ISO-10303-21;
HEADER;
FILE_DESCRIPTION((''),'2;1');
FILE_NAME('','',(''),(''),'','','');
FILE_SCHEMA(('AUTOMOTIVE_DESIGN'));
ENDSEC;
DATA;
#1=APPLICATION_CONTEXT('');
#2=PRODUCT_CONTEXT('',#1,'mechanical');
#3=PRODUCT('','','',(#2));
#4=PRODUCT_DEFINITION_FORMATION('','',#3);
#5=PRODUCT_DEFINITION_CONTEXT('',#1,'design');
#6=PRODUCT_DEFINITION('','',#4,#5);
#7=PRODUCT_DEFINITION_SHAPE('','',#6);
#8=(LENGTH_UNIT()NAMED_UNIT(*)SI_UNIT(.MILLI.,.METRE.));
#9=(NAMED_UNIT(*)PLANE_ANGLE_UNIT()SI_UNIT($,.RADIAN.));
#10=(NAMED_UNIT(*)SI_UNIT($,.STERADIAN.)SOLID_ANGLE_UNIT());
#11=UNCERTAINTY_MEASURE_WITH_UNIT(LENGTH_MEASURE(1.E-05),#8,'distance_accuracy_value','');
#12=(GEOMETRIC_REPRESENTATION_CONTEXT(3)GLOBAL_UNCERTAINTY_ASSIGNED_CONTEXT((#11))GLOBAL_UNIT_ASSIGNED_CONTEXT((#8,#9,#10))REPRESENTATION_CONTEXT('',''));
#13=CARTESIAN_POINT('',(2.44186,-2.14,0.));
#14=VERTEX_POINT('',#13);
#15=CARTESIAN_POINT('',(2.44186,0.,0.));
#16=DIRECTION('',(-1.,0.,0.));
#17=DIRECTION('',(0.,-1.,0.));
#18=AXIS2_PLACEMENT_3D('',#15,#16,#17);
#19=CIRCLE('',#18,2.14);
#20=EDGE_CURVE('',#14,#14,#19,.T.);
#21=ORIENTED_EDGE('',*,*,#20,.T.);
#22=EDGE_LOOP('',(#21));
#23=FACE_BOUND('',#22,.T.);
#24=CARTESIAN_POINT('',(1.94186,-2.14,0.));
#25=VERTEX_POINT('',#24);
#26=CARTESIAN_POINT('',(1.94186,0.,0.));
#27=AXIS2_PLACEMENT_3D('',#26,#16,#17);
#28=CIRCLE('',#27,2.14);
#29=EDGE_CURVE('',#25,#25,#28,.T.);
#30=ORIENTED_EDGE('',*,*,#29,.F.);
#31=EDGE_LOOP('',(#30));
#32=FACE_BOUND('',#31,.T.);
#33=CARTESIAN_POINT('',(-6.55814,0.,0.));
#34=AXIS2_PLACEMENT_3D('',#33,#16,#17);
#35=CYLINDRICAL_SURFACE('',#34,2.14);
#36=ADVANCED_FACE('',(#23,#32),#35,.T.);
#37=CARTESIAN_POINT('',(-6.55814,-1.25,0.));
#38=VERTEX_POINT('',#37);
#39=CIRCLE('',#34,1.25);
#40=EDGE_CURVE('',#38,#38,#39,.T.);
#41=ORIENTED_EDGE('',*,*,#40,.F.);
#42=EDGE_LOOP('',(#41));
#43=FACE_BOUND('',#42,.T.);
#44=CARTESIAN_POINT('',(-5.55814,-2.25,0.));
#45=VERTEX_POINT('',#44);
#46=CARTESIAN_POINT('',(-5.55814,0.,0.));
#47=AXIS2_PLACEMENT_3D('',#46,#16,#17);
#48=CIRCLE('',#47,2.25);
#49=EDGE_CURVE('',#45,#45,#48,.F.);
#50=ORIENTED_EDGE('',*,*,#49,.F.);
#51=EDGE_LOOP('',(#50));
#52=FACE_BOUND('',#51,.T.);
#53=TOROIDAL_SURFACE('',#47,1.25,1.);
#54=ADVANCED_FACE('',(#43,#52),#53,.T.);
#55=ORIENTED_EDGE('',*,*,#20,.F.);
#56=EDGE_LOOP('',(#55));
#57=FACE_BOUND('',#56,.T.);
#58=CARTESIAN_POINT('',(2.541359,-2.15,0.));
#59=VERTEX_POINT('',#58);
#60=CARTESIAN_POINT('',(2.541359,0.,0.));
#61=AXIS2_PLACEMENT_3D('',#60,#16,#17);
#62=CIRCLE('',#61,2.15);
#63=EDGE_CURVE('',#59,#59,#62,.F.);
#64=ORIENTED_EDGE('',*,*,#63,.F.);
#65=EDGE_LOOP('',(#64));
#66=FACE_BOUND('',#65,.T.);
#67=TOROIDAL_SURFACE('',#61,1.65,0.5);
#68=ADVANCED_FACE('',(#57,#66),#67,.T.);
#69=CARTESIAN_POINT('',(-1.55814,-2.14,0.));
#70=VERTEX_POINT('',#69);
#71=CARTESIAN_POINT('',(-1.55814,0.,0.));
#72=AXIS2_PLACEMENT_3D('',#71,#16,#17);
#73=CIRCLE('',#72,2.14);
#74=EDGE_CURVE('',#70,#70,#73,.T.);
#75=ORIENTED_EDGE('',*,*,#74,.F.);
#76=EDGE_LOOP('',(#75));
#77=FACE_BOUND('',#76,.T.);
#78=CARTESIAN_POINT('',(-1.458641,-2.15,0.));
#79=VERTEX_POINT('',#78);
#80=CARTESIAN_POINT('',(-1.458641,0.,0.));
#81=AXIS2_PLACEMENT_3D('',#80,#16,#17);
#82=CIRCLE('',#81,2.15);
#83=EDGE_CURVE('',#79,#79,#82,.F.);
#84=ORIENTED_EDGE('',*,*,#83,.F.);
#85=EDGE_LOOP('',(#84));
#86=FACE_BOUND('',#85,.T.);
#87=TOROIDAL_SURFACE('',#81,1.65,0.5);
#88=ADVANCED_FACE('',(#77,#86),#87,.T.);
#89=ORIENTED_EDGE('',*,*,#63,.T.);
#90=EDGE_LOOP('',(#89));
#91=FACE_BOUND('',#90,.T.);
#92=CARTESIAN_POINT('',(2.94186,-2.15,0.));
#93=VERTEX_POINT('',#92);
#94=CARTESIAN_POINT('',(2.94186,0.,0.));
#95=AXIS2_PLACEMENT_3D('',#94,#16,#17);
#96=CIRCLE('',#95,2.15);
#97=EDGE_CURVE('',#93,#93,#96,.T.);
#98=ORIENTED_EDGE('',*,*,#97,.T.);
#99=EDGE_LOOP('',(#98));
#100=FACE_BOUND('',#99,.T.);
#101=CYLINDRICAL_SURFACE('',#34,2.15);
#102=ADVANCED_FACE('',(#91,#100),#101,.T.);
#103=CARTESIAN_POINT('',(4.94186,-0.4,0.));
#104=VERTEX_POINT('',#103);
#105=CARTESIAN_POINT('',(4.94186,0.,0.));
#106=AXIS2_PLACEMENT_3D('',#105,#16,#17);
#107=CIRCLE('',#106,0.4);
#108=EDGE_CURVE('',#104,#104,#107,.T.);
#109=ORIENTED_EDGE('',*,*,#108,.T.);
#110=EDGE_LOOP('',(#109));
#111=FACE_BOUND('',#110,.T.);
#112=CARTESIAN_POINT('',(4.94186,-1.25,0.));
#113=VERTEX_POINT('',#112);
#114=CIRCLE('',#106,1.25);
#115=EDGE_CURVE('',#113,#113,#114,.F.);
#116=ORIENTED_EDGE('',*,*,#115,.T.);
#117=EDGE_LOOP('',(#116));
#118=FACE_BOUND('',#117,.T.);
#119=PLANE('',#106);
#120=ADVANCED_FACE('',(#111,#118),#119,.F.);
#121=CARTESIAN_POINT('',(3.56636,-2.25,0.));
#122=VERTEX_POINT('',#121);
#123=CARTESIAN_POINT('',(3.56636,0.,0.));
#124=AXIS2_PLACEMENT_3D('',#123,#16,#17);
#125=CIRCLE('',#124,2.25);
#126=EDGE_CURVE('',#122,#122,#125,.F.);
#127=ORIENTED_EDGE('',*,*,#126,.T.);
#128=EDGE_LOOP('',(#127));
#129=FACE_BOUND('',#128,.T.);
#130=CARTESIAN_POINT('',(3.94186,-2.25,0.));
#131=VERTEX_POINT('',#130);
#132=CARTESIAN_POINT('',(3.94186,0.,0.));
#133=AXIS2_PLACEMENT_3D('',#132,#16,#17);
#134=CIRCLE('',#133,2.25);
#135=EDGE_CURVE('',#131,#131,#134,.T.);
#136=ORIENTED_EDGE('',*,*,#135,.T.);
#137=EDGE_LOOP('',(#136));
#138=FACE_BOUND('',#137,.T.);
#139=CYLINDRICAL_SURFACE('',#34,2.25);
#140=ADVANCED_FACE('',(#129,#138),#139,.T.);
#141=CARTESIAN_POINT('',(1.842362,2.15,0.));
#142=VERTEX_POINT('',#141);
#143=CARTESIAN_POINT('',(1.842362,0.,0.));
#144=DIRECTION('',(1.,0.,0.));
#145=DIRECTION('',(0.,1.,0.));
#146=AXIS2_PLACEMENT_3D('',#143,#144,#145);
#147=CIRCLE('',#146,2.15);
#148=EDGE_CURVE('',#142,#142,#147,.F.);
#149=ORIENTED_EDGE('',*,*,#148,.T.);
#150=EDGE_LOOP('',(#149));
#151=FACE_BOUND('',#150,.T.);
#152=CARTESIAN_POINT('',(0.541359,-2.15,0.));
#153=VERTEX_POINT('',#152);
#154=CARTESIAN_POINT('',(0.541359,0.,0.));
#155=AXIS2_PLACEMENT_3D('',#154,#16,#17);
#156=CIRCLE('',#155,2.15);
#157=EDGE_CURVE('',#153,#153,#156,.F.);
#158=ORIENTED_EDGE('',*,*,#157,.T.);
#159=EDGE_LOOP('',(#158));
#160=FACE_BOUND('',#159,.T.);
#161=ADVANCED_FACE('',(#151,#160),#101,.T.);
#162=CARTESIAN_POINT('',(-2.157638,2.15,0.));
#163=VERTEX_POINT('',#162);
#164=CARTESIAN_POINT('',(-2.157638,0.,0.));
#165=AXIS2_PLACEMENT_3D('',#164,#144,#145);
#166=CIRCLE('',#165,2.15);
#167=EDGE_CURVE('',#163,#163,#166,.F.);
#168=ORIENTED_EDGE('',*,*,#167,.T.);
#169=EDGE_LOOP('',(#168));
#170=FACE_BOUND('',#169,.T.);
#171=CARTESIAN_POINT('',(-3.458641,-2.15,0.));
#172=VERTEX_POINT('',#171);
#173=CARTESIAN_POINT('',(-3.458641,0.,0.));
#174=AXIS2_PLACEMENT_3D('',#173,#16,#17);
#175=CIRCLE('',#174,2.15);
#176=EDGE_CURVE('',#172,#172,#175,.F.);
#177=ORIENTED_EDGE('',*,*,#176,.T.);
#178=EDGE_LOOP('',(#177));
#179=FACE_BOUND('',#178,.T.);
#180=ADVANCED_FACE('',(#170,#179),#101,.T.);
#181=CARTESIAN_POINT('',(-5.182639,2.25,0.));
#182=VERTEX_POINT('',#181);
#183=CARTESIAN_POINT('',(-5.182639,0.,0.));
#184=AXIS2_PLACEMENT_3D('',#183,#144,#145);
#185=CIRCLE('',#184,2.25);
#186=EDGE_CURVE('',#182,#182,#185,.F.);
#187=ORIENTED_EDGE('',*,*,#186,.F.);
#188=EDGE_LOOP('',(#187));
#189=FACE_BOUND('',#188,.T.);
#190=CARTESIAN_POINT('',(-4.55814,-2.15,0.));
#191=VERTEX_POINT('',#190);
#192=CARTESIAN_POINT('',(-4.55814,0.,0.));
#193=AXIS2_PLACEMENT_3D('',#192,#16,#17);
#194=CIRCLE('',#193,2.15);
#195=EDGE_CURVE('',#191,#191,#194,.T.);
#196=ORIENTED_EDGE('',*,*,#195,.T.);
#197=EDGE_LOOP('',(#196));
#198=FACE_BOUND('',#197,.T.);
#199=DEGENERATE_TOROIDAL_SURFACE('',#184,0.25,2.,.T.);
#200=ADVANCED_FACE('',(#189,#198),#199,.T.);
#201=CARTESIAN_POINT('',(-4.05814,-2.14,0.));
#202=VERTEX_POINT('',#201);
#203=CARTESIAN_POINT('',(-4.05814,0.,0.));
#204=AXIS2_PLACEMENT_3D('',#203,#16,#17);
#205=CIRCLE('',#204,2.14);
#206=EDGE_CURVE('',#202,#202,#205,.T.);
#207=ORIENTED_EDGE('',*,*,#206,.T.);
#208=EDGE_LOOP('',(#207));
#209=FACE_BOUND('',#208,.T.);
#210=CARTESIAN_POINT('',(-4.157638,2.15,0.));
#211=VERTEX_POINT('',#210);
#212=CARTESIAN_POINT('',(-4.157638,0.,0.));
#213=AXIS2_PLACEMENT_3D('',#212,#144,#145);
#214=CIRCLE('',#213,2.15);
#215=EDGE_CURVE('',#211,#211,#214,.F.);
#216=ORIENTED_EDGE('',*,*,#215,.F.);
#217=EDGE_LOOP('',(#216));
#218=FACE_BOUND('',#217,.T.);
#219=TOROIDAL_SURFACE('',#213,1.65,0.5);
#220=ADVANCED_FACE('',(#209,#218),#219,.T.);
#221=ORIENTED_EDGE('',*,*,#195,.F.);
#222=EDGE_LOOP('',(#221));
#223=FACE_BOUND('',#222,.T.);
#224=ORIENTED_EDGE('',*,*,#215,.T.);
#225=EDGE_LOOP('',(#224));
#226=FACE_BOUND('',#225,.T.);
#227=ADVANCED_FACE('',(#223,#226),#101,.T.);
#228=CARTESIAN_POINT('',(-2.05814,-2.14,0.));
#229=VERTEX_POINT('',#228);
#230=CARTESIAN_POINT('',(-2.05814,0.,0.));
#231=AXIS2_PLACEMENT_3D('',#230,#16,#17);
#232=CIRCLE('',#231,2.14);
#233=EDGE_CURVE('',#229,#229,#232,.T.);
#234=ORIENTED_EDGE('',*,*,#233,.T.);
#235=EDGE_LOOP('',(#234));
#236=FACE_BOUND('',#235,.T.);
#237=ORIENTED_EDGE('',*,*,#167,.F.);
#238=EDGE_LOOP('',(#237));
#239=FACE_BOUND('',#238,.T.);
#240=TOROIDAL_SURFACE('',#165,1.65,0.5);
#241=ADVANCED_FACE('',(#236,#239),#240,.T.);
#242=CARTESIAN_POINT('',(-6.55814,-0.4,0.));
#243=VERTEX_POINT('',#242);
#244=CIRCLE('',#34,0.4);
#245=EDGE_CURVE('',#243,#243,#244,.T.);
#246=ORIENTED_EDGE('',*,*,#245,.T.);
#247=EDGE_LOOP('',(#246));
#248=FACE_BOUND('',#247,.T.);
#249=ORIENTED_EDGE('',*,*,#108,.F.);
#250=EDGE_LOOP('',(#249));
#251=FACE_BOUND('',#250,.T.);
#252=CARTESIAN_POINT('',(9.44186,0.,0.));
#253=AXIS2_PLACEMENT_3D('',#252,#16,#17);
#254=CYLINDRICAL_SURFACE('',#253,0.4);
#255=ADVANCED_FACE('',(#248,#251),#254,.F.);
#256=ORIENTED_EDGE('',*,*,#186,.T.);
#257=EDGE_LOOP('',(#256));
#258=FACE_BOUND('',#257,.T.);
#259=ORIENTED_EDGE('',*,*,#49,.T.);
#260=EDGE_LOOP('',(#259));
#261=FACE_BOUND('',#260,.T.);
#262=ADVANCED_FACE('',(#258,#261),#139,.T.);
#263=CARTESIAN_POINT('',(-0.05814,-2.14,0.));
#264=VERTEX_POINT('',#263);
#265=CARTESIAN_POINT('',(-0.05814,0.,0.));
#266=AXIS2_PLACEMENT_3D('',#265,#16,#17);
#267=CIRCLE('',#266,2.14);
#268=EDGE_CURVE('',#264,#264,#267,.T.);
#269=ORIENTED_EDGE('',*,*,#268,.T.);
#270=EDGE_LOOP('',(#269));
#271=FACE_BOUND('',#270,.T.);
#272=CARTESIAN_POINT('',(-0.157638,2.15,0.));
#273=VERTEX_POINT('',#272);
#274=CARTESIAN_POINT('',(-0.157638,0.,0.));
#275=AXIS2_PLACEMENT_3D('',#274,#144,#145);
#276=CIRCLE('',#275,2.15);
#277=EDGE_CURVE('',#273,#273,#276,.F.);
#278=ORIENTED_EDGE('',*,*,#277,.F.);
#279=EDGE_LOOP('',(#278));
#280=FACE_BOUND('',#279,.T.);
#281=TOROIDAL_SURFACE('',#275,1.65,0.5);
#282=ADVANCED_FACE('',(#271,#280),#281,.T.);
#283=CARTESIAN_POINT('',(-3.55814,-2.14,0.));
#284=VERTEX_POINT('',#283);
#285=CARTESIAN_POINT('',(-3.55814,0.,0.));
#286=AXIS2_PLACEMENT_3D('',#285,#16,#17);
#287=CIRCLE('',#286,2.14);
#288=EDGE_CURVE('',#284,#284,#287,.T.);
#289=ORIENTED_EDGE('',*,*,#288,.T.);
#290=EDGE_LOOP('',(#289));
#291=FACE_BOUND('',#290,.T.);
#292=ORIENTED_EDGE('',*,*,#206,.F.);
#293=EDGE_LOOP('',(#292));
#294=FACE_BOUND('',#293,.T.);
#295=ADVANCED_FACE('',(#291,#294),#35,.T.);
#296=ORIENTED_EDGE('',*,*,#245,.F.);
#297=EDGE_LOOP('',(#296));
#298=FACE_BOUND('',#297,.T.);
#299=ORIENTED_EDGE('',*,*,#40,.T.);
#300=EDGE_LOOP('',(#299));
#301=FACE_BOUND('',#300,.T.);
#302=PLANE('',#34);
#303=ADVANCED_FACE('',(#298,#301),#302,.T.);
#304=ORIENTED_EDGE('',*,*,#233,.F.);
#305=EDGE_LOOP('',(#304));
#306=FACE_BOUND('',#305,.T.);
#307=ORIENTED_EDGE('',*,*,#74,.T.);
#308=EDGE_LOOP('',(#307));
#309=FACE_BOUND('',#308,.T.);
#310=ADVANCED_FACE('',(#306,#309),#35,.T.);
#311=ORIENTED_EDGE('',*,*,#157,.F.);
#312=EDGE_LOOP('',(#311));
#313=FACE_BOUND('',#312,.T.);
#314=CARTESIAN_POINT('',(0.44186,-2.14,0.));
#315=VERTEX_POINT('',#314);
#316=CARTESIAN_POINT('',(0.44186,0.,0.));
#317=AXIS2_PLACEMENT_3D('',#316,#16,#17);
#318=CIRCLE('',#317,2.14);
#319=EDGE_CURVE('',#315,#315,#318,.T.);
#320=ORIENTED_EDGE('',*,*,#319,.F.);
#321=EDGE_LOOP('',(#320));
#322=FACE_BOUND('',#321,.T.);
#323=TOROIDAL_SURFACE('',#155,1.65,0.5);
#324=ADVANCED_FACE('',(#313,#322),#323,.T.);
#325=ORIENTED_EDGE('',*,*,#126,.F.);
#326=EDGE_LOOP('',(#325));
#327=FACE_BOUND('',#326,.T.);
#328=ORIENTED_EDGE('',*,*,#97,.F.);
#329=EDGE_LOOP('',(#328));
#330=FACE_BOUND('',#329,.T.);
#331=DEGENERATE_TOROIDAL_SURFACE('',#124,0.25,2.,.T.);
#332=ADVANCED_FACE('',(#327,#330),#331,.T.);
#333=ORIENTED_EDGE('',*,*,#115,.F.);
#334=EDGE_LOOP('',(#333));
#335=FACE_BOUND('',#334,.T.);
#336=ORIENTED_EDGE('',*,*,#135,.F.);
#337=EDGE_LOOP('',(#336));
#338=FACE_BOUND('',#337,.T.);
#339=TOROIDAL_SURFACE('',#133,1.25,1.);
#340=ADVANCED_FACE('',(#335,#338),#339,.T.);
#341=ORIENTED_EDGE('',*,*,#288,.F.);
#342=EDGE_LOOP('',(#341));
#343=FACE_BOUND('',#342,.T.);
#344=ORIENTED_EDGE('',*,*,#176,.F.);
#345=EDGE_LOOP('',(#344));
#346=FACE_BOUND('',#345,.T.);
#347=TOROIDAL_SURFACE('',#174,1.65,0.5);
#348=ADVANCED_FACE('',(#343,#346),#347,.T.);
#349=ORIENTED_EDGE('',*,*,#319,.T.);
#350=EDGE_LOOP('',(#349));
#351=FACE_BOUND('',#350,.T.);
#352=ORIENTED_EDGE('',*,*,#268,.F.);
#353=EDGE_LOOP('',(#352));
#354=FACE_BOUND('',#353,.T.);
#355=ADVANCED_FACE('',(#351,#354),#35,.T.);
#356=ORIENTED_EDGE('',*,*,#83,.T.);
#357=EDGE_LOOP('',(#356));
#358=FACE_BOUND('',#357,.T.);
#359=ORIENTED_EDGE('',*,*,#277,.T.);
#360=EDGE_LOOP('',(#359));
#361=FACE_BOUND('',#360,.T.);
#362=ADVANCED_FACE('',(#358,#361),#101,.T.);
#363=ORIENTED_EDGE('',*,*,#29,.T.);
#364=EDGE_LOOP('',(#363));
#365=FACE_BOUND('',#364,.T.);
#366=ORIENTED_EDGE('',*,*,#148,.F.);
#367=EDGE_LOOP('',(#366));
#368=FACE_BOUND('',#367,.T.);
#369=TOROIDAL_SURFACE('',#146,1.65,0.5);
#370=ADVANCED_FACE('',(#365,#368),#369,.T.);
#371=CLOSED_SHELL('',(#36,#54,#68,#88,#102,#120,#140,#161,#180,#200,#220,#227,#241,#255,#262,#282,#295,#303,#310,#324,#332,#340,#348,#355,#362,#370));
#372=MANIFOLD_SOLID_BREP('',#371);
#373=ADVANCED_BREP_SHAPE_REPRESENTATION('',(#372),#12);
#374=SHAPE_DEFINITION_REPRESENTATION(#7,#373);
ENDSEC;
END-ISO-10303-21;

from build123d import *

# Parameters (mm, degrees)
FILLET2_R          = 1
FILLET10_R         = 0.5
FILLET11_R         = 2
SKETCH3_R          = 0.4
CUT_EXTRUDE2_DEPTH = 16


with BuildPart() as part:
    # Sketch2 → Revolve1 (revolve)
    with BuildSketch(Plane.XY, mode=Mode.PRIVATE) as revolve1_sk:
        Polygon((-6.558139535, 2.25), (-6.558139535, 0), (4.941860465, 0), (4.941860465, 2.25), (2.941860465, 2.25), (2.941860465, 2.15), (2.441860465, 2.15), (2.441860465, 2.14), (1.941860465, 2.14), (1.941860465, 2.15), (1.442088765, 2.15), (0.441860465, 2.15), (0.441860465, 2.14), (-0.058139535, 2.14), (-0.058139535, 2.15), (-1.558139535, 2.15), (-1.558139535, 2.14), (-2.058139535, 2.14), (-2.058139535, 2.15), (-3.558139535, 2.15), (-3.558139535, 2.14), (-4.058139535, 2.14), (-4.058139535, 2.15), (-4.558139535, 2.15), (-4.558139535, 2.25), align=None)
    revolve(revolve1_sk.sketch.rotate(Axis((-6.558139535, 0, 0), (1, 0, 0)), 180), axis=Axis((-6.558139535, 0, 0), (1, 0, 0)))

    # Fillet2
    fillet2_edges = [part.edges().sort_by_distance(p)[0] for p in [
        (-6.558139535, 2.25, 0),
        (4.941860465, 2.25, 0),
    ]]
    fillet(fillet2_edges, radius=FILLET2_R)

    # Fillet10
    # the kernel refuses this fillet: 0.5 mm, written as the material it takes off along each edge
    with BuildSketch(Plane(origin=(-4.058139535, 0, 0), x_dir=(0, -1, 0), z_dir=(0, 0, 1))) as fillet10_piece_1:
        with BuildLine():
            CenterArc((1.65, -0.099498744), FILLET10_R, 0, 11.478340955)
            Line((2.14, 0), (2.1498, 0.001989975))
            ThreePointArc((2.1498, 0.001989975), (2.145, 0.01), (2.15, 0.01))
            Line((2.15, 0.01), (2.16, 0))
            Line((2.16, 0), (2.16, -0.099498744))
            Line((2.16, -0.099498744), (2.15, -0.099498744))
        make_face()
    revolve(axis=Axis((-4.058139535, 0, 0), (1, 0, 0)), mode=Mode.SUBTRACT)
    with BuildSketch(Plane(origin=(-3.558139535, 0, 0), x_dir=(0, -1, 0), z_dir=(0, 0, 1))) as fillet10_piece_2:
        with BuildLine():
            CenterArc((1.65, 0.099498744), FILLET10_R, 348.521659045, 11.478340955)
            Line((2.15, 0.099498744), (2.16, 0.099498744))
            Line((2.16, 0.099498744), (2.16, 0))
            Line((2.16, 0), (2.15, -0.01))
            ThreePointArc((2.15, -0.01), (2.145, -0.01), (2.1498, -0.001989975))
            Line((2.1498, -0.001989975), (2.14, 0))
        make_face()
    revolve(axis=Axis((-3.558139535, 0, 0), (1, 0, 0)), mode=Mode.SUBTRACT)
    with BuildSketch(Plane(origin=(-2.058139535, 0, 0), x_dir=(0, -1, 0), z_dir=(0, 0, 1))) as fillet10_piece_3:
        with BuildLine():
            CenterArc((1.65, -0.099498744), FILLET10_R, 0, 11.478340955)
            Line((2.14, 0), (2.1498, 0.001989975))
            ThreePointArc((2.1498, 0.001989975), (2.145, 0.01), (2.15, 0.01))
            Line((2.15, 0.01), (2.16, 0))
            Line((2.16, 0), (2.16, -0.099498744))
            Line((2.16, -0.099498744), (2.15, -0.099498744))
        make_face()
    revolve(axis=Axis((-2.058139535, 0, 0), (1, 0, 0)), mode=Mode.SUBTRACT)
    with BuildSketch(Plane(origin=(-1.558139535, 0, 0), x_dir=(0, -1, 0), z_dir=(0, 0, 1))) as fillet10_piece_4:
        with BuildLine():
            CenterArc((1.65, 0.099498744), FILLET10_R, 348.521659045, 11.478340955)
            Line((2.15, 0.099498744), (2.16, 0.099498744))
            Line((2.16, 0.099498744), (2.16, 0))
            Line((2.16, 0), (2.15, -0.01))
            ThreePointArc((2.15, -0.01), (2.145, -0.01), (2.1498, -0.001989975))
            Line((2.1498, -0.001989975), (2.14, 0))
        make_face()
    revolve(axis=Axis((-1.558139535, 0, 0), (1, 0, 0)), mode=Mode.SUBTRACT)
    with BuildSketch(Plane(origin=(-0.058139535, 0, 0), x_dir=(0, -1, 0), z_dir=(0, 0, 1))) as fillet10_piece_5:
        with BuildLine():
            CenterArc((1.65, -0.099498744), FILLET10_R, 0, 11.478340955)
            Line((2.14, 0), (2.1498, 0.001989975))
            ThreePointArc((2.1498, 0.001989975), (2.145, 0.01), (2.15, 0.01))
            Line((2.15, 0.01), (2.16, 0))
            Line((2.16, 0), (2.16, -0.099498744))
            Line((2.16, -0.099498744), (2.15, -0.099498744))
        make_face()
    revolve(axis=Axis((-0.058139535, 0, 0), (1, 0, 0)), mode=Mode.SUBTRACT)
    with BuildSketch(Plane(origin=(0.441860465, 0, 0), x_dir=(0, -1, 0), z_dir=(0, 0, 1))) as fillet10_piece_6:
        with BuildLine():
            CenterArc((1.65, 0.099498744), FILLET10_R, 348.521659045, 11.478340955)
            Line((2.15, 0.099498744), (2.16, 0.099498744))
            Line((2.16, 0.099498744), (2.16, 0))
            Line((2.16, 0), (2.15, -0.01))
            ThreePointArc((2.15, -0.01), (2.145, -0.01), (2.1498, -0.001989975))
            Line((2.1498, -0.001989975), (2.14, 0))
        make_face()
    revolve(axis=Axis((0.441860465, 0, 0), (1, 0, 0)), mode=Mode.SUBTRACT)
    with BuildSketch(Plane(origin=(1.941860465, 0, 0), x_dir=(0, -1, 0), z_dir=(0, 0, 1))) as fillet10_piece_7:
        with BuildLine():
            CenterArc((1.65, -0.099498744), FILLET10_R, 0, 11.478340955)
            Line((2.14, 0), (2.1498, 0.001989975))
            ThreePointArc((2.1498, 0.001989975), (2.145, 0.01), (2.15, 0.01))
            Line((2.15, 0.01), (2.16, 0))
            Line((2.16, 0), (2.16, -0.099498744))
            Line((2.16, -0.099498744), (2.15, -0.099498744))
        make_face()
    revolve(axis=Axis((1.941860465, 0, 0), (1, 0, 0)), mode=Mode.SUBTRACT)
    with BuildSketch(Plane(origin=(2.441860465, 0, 0), x_dir=(0, -1, 0), z_dir=(0, 0, 1))) as fillet10_piece_8:
        with BuildLine():
            CenterArc((1.65, 0.099498744), FILLET10_R, 348.521659045, 11.478340955)
            Line((2.15, 0.099498744), (2.16, 0.099498744))
            Line((2.16, 0.099498744), (2.16, 0))
            Line((2.16, 0), (2.15, -0.01))
            ThreePointArc((2.15, -0.01), (2.145, -0.01), (2.1498, -0.001989975))
            Line((2.1498, -0.001989975), (2.14, 0))
        make_face()
    revolve(axis=Axis((2.441860465, 0, 0), (1, 0, 0)), mode=Mode.SUBTRACT)

    # Fillet11
    # the kernel refuses this fillet: 2 mm, written as the material it takes off along each edge
    with BuildSketch(Plane(origin=(-4.558139535, 0, 0), x_dir=(0, -1, 0), z_dir=(0, 0, 1))) as fillet11_piece_1:
        with BuildLine():
            CenterArc((0.25, -0.6244998), FILLET11_R, 0, 18.194872339)
            Line((2.15, 0), (2.25, 0))
            Line((2.25, 0), (2.25, -0.6244998))
        make_face()
    revolve(axis=Axis((-4.558139535, 0, 0), (1, 0, 0)), mode=Mode.SUBTRACT)
    with BuildSketch(Plane(origin=(2.941860465, 0, 0), x_dir=(0, -1, 0), z_dir=(0, 0, 1))) as fillet11_piece_2:
        with BuildLine():
            CenterArc((0.25, 0.6244998), FILLET11_R, 341.805127661, 18.194872339)
            Line((2.25, 0.6244998), (2.25, 0))
            Line((2.25, 0), (2.15, 0))
        make_face()
    revolve(axis=Axis((2.941860465, 0, 0), (1, 0, 0)), mode=Mode.SUBTRACT)

    # Sketch3 → Cut-Extrude2 (cut)
    with BuildSketch(Plane.ZY.offset(6.558139535)):
        with Locations(Location((0, 0, 0), (0, 0, 270))):
            Circle(SKETCH3_R)
    extrude(amount=-CUT_EXTRUDE2_DEPTH, mode=Mode.SUBTRACT)


solid = part.part
